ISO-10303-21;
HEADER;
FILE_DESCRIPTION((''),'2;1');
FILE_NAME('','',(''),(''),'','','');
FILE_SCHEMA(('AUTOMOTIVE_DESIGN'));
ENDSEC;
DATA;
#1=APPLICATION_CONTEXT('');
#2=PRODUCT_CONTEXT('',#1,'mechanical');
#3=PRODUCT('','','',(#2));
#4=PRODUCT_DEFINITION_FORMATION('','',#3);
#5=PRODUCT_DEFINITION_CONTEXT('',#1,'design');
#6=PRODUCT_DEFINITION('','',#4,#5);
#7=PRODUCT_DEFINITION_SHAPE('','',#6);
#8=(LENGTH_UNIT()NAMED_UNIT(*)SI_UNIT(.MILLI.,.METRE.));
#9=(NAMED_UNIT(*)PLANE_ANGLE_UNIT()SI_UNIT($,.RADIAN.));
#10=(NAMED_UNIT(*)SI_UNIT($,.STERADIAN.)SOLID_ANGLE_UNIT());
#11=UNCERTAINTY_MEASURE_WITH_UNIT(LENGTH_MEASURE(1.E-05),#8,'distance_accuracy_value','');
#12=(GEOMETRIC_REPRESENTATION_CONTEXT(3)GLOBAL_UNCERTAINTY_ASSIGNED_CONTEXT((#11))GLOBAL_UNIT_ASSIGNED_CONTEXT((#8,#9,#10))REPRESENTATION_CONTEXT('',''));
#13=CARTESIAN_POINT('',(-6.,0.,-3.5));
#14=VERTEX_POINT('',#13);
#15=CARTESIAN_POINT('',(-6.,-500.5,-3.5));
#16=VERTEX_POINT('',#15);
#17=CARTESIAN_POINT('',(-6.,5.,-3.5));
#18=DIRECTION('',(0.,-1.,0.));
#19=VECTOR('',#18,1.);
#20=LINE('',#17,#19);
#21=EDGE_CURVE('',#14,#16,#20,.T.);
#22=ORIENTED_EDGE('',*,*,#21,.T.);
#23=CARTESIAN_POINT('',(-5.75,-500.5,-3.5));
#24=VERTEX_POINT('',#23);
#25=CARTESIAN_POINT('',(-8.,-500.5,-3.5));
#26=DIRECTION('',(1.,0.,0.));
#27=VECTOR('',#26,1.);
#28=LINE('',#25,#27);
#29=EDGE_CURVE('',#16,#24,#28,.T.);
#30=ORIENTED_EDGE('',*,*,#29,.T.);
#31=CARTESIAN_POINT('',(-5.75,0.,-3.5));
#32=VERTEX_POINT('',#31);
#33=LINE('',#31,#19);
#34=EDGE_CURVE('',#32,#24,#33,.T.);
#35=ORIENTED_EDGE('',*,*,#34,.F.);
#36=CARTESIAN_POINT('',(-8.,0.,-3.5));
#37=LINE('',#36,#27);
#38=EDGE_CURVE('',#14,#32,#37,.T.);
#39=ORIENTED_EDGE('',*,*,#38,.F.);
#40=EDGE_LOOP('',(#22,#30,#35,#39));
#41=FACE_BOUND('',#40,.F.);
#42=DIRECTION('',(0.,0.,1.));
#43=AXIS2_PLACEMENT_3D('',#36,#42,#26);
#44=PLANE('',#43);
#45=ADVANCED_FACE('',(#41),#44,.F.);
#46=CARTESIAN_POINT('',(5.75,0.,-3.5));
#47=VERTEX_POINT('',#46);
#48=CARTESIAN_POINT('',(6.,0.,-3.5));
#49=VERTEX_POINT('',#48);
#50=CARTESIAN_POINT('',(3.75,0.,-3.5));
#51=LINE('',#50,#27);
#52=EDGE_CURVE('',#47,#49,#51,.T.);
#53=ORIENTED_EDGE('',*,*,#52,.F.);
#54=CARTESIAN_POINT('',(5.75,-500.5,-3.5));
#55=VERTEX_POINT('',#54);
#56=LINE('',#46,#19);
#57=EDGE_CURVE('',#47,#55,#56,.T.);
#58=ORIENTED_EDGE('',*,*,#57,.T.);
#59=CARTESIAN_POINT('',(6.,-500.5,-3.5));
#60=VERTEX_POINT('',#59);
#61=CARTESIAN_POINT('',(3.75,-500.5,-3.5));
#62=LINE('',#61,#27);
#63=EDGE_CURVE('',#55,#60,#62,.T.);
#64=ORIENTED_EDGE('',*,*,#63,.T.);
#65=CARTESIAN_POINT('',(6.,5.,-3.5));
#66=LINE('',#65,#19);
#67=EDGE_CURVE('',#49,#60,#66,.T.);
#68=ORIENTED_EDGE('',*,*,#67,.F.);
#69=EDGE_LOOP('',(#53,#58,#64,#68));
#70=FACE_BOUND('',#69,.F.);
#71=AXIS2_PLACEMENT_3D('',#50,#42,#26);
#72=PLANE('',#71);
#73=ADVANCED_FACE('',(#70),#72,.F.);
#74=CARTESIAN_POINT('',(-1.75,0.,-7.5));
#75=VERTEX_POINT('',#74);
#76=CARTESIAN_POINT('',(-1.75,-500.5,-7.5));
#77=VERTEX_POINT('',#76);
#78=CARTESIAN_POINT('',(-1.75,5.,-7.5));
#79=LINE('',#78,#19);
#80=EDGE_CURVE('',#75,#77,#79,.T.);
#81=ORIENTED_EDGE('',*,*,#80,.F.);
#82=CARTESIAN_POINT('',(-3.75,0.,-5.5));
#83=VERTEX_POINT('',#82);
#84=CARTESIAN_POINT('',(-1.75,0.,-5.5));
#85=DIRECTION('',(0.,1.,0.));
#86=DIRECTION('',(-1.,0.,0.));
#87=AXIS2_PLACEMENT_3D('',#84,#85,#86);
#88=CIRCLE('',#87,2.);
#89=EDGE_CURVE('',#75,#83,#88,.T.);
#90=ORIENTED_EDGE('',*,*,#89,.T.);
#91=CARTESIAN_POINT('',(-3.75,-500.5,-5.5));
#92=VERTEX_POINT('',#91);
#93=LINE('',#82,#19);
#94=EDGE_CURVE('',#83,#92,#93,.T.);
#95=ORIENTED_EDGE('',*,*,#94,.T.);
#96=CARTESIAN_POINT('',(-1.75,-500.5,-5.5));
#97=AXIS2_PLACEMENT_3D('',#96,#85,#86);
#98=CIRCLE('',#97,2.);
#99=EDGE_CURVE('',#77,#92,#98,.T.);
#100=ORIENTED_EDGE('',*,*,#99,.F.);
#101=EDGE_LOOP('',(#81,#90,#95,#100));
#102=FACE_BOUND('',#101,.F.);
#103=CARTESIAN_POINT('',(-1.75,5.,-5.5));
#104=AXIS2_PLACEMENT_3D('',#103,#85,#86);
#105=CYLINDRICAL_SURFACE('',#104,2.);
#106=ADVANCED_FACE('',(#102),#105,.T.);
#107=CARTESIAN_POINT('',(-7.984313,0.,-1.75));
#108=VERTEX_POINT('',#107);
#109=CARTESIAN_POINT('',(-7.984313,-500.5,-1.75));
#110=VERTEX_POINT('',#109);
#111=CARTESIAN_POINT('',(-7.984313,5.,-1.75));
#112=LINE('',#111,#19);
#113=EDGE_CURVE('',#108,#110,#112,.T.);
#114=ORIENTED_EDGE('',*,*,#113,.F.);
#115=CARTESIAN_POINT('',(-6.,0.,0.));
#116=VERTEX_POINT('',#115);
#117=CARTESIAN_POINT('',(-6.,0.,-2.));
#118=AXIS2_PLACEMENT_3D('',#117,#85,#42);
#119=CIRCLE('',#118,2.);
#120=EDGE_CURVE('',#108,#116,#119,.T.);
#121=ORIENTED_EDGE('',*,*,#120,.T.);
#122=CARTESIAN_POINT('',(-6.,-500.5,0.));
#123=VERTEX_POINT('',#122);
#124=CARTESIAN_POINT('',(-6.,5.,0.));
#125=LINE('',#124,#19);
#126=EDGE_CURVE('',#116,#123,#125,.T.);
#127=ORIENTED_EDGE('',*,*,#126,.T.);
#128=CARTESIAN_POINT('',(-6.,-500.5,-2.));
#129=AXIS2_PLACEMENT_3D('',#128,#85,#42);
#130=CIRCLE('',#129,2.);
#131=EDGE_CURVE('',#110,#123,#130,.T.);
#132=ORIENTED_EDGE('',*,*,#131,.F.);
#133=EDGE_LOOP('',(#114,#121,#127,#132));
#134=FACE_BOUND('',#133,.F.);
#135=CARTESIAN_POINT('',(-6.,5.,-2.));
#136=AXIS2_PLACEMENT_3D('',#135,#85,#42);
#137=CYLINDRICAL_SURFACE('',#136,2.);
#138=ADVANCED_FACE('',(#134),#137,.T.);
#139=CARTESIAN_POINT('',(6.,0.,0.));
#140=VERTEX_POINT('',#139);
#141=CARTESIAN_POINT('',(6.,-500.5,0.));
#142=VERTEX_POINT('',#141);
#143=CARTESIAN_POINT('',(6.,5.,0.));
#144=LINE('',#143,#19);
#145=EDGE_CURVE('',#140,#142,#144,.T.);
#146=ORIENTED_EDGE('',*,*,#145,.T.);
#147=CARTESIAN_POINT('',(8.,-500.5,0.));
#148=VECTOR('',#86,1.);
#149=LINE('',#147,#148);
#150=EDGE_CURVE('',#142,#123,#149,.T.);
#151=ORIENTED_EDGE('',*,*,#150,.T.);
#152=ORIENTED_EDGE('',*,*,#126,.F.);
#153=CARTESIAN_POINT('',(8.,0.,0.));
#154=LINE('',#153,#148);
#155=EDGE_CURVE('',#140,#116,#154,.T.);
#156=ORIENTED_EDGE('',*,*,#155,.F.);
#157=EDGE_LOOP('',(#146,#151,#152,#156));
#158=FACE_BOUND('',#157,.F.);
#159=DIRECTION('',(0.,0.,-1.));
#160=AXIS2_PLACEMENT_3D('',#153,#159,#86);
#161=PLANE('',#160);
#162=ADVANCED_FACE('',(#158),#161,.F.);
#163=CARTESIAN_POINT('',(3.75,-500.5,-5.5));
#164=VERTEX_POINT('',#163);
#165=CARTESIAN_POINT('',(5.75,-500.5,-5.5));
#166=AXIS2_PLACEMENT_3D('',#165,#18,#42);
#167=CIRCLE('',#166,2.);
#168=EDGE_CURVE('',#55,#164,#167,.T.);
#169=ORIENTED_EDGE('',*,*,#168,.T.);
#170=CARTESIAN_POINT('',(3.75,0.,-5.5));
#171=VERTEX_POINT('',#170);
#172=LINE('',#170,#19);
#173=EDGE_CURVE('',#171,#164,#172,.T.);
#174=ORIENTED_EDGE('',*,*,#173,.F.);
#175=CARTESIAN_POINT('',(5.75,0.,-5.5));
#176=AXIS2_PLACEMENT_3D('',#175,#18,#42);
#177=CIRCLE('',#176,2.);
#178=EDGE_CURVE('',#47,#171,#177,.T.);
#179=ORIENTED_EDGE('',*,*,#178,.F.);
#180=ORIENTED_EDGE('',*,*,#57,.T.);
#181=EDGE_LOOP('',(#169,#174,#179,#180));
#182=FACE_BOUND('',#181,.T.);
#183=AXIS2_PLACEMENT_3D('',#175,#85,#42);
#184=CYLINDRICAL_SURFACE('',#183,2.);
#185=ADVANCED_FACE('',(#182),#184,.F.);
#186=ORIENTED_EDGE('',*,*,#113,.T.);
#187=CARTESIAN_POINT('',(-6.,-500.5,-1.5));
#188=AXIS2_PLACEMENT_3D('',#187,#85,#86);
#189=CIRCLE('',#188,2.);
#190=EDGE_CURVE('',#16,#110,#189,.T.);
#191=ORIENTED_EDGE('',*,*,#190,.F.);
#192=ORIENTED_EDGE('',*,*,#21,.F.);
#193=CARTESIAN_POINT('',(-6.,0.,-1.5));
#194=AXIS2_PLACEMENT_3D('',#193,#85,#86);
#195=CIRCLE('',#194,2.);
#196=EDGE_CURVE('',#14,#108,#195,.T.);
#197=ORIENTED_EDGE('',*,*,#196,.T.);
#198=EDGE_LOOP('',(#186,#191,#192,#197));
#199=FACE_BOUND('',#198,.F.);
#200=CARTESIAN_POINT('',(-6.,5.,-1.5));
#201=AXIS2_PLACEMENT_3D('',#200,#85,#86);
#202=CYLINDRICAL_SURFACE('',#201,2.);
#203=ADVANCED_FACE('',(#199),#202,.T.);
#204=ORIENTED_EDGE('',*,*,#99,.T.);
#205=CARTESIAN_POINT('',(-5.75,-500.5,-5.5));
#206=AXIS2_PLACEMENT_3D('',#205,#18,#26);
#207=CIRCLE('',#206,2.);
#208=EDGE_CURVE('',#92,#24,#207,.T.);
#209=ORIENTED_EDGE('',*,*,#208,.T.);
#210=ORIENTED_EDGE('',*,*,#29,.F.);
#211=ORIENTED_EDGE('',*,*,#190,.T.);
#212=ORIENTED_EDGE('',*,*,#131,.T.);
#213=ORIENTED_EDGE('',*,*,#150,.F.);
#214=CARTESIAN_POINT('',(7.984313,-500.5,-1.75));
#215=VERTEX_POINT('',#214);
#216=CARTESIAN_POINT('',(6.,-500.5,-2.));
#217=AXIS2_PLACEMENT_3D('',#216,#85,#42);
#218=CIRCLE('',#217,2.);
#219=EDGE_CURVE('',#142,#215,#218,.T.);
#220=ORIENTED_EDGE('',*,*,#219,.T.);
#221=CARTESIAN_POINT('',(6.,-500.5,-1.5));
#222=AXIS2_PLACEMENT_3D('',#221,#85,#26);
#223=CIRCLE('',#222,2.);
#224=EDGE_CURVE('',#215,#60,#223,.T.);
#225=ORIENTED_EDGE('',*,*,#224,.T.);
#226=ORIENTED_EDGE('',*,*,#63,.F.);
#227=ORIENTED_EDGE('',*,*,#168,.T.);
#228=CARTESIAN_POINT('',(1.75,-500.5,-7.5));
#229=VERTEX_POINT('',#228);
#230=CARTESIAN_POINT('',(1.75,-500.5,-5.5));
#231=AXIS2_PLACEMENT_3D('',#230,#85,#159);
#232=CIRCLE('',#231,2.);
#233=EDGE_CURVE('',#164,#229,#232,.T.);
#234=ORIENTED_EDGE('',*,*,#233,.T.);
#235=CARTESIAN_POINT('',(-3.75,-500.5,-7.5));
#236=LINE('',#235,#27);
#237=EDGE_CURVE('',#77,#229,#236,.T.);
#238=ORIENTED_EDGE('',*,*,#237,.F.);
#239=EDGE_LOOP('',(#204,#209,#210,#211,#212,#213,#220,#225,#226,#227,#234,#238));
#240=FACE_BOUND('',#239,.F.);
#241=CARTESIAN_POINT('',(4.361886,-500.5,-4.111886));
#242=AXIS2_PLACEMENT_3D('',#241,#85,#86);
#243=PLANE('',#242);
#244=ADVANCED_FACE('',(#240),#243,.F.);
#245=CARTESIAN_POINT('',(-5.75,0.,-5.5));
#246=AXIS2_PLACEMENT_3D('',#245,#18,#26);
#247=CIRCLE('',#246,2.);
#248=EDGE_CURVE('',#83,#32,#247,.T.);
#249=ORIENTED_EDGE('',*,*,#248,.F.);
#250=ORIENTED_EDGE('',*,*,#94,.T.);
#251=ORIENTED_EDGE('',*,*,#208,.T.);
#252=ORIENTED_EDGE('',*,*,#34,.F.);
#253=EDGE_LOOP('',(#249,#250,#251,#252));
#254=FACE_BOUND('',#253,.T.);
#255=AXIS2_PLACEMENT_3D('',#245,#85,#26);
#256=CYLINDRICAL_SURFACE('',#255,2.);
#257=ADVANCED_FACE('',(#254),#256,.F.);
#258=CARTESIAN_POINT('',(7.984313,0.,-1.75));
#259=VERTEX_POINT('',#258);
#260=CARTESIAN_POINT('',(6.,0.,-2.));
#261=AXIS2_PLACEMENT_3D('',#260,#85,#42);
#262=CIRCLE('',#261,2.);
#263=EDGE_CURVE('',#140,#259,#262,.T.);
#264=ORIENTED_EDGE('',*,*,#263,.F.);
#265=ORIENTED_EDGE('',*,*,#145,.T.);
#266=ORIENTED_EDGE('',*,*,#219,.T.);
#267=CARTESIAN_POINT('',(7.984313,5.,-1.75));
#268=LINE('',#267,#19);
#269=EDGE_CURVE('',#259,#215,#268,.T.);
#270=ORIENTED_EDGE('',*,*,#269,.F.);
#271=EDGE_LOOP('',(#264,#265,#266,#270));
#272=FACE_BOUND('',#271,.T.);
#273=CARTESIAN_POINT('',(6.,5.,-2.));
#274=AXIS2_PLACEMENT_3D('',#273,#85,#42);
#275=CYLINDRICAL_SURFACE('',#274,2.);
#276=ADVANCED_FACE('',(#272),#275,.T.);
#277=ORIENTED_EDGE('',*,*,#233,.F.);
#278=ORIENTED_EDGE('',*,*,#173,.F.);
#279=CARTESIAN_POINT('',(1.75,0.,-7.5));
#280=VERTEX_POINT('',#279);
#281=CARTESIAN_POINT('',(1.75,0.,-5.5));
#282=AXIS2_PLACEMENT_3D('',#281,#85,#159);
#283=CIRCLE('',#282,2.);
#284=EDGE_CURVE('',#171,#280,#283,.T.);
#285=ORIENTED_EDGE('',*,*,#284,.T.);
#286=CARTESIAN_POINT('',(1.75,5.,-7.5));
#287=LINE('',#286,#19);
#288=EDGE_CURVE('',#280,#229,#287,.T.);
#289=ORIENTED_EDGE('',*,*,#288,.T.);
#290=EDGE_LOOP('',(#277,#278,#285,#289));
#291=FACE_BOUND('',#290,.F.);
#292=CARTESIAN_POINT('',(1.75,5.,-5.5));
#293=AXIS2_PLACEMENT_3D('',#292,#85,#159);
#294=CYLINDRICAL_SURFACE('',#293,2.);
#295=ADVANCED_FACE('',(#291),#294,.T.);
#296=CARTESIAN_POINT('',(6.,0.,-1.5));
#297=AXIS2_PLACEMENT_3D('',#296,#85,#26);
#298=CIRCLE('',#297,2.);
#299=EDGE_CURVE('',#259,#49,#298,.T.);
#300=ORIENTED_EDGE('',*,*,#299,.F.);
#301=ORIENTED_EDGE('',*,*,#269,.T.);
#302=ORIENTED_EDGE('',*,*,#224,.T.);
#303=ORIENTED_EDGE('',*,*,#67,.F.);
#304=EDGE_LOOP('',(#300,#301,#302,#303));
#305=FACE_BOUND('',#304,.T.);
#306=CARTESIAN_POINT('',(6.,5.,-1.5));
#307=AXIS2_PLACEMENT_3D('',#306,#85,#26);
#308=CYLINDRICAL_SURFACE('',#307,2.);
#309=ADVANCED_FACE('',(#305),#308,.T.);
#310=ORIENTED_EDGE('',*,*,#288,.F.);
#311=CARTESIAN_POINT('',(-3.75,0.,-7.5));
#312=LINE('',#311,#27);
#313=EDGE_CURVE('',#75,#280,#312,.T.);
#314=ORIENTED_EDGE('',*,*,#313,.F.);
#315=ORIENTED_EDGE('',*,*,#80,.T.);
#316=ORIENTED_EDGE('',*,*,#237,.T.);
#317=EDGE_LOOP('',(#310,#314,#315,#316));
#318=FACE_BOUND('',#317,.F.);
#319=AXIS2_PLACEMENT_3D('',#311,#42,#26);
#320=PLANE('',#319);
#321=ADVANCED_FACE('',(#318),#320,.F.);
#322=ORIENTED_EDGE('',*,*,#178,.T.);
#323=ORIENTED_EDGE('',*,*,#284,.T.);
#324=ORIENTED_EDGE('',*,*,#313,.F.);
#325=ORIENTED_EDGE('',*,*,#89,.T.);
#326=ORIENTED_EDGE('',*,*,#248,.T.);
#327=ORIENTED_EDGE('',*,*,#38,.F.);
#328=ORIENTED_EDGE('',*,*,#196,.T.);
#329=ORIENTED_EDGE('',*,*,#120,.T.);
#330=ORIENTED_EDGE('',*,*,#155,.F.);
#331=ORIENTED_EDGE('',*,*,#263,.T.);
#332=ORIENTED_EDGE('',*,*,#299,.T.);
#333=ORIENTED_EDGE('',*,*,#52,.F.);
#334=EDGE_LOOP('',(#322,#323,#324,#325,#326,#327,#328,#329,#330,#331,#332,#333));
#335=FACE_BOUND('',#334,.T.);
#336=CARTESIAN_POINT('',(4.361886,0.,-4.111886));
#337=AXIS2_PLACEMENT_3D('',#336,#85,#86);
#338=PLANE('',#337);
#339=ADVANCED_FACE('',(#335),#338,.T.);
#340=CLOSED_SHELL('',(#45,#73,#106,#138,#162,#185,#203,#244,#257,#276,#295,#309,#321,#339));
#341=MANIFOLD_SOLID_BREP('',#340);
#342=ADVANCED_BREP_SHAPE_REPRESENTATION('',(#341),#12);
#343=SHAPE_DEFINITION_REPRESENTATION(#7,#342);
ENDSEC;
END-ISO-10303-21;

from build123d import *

# Parameters (mm, degrees)
F1_DEPTH    = 500.5
F2_T1_DEPTH = 500.5
F2_T3_DEPTH = 510.5


# Not quite as in the source:
# - a fillet or chamfer that OpenCascade refuses, or shapes differently, is made with other operations: its cross-section is extruded or revolved along the edge and cut away or added


with BuildPart() as f1:
    # F0 (on Front) → F1 (new body)
    with BuildSketch(Plane.XZ):
        Polygon((8, 0), (0, 0), (-8, 0), (-8, -3.5), (-3.75, -3.5), (-3.75, -7.5), (3.75, -7.5), (3.75, -3.5), (8, -3.5), align=None)
    extrude(amount=F1_DEPTH)

    # F2: fillet of radius 2 on 8 edges, made by hand

    # F2_s2 → F2_t1 (join)
    with BuildSketch(Plane.XZ):
        with BuildLine():
            ThreePointArc((5.75, -3.5), (4.3357864376, -4.0857864376), (3.75, -5.5))
            Line((3.75, -5.5), (3.75, -3.5))
            Line((3.75, -3.5), (5.75, -3.5))
        make_face()
        with BuildLine():
            ThreePointArc((-3.75, -5.5), (-4.3357864376, -4.0857864376), (-5.75, -3.5))
            Line((-5.75, -3.5), (-3.75, -3.5))
            Line((-3.75, -3.5), (-3.75, -5.5))
        make_face()
    extrude(amount=F2_T1_DEPTH)

    # F2_s4 → F2_t3 (cut)
    with BuildSketch(Plane.XZ.offset(-5)):
        with BuildLine():
            ThreePointArc((1.75, -7.5), (3.1642135624, -6.9142135624), (3.75, -5.5))
            Line((3.75, -5.5), (3.75, -7.5))
            Line((3.75, -7.5), (1.75, -7.5))
        make_face()
        with BuildLine():
            ThreePointArc((-3.75, -5.5), (-3.1642135624, -6.9142135624), (-1.75, -7.5))
            Line((-1.75, -7.5), (-3.75, -7.5))
            Line((-3.75, -7.5), (-3.75, -5.5))
        make_face()
        with BuildLine():
            ThreePointArc((-8, -1.5), (-7.4142135624, -2.9142135624), (-6, -3.5))
            Line((-6, -3.5), (-8, -3.5))
            Line((-8, -3.5), (-8, -1.5))
        make_face()
        with BuildLine():
            ThreePointArc((-6, 0), (-7.4142135624, -0.5857864376), (-8, -2))
            Line((-8, -2), (-8, 0))
            Line((-8, 0), (-6, 0))
        make_face()
        with BuildLine():
            ThreePointArc((8, -1.5), (7.4142135624, -2.9142135624), (6, -3.5))
            Line((6, -3.5), (8, -3.5))
            Line((8, -3.5), (8, -1.5))
        make_face()
        with BuildLine():
            ThreePointArc((6, 0), (7.4142135624, -0.5857864376), (8, -2))
            Line((8, -2), (8, 0))
            Line((8, 0), (6, 0))
        make_face()
    extrude(amount=F2_T3_DEPTH, mode=Mode.SUBTRACT)


solid = f1.part
